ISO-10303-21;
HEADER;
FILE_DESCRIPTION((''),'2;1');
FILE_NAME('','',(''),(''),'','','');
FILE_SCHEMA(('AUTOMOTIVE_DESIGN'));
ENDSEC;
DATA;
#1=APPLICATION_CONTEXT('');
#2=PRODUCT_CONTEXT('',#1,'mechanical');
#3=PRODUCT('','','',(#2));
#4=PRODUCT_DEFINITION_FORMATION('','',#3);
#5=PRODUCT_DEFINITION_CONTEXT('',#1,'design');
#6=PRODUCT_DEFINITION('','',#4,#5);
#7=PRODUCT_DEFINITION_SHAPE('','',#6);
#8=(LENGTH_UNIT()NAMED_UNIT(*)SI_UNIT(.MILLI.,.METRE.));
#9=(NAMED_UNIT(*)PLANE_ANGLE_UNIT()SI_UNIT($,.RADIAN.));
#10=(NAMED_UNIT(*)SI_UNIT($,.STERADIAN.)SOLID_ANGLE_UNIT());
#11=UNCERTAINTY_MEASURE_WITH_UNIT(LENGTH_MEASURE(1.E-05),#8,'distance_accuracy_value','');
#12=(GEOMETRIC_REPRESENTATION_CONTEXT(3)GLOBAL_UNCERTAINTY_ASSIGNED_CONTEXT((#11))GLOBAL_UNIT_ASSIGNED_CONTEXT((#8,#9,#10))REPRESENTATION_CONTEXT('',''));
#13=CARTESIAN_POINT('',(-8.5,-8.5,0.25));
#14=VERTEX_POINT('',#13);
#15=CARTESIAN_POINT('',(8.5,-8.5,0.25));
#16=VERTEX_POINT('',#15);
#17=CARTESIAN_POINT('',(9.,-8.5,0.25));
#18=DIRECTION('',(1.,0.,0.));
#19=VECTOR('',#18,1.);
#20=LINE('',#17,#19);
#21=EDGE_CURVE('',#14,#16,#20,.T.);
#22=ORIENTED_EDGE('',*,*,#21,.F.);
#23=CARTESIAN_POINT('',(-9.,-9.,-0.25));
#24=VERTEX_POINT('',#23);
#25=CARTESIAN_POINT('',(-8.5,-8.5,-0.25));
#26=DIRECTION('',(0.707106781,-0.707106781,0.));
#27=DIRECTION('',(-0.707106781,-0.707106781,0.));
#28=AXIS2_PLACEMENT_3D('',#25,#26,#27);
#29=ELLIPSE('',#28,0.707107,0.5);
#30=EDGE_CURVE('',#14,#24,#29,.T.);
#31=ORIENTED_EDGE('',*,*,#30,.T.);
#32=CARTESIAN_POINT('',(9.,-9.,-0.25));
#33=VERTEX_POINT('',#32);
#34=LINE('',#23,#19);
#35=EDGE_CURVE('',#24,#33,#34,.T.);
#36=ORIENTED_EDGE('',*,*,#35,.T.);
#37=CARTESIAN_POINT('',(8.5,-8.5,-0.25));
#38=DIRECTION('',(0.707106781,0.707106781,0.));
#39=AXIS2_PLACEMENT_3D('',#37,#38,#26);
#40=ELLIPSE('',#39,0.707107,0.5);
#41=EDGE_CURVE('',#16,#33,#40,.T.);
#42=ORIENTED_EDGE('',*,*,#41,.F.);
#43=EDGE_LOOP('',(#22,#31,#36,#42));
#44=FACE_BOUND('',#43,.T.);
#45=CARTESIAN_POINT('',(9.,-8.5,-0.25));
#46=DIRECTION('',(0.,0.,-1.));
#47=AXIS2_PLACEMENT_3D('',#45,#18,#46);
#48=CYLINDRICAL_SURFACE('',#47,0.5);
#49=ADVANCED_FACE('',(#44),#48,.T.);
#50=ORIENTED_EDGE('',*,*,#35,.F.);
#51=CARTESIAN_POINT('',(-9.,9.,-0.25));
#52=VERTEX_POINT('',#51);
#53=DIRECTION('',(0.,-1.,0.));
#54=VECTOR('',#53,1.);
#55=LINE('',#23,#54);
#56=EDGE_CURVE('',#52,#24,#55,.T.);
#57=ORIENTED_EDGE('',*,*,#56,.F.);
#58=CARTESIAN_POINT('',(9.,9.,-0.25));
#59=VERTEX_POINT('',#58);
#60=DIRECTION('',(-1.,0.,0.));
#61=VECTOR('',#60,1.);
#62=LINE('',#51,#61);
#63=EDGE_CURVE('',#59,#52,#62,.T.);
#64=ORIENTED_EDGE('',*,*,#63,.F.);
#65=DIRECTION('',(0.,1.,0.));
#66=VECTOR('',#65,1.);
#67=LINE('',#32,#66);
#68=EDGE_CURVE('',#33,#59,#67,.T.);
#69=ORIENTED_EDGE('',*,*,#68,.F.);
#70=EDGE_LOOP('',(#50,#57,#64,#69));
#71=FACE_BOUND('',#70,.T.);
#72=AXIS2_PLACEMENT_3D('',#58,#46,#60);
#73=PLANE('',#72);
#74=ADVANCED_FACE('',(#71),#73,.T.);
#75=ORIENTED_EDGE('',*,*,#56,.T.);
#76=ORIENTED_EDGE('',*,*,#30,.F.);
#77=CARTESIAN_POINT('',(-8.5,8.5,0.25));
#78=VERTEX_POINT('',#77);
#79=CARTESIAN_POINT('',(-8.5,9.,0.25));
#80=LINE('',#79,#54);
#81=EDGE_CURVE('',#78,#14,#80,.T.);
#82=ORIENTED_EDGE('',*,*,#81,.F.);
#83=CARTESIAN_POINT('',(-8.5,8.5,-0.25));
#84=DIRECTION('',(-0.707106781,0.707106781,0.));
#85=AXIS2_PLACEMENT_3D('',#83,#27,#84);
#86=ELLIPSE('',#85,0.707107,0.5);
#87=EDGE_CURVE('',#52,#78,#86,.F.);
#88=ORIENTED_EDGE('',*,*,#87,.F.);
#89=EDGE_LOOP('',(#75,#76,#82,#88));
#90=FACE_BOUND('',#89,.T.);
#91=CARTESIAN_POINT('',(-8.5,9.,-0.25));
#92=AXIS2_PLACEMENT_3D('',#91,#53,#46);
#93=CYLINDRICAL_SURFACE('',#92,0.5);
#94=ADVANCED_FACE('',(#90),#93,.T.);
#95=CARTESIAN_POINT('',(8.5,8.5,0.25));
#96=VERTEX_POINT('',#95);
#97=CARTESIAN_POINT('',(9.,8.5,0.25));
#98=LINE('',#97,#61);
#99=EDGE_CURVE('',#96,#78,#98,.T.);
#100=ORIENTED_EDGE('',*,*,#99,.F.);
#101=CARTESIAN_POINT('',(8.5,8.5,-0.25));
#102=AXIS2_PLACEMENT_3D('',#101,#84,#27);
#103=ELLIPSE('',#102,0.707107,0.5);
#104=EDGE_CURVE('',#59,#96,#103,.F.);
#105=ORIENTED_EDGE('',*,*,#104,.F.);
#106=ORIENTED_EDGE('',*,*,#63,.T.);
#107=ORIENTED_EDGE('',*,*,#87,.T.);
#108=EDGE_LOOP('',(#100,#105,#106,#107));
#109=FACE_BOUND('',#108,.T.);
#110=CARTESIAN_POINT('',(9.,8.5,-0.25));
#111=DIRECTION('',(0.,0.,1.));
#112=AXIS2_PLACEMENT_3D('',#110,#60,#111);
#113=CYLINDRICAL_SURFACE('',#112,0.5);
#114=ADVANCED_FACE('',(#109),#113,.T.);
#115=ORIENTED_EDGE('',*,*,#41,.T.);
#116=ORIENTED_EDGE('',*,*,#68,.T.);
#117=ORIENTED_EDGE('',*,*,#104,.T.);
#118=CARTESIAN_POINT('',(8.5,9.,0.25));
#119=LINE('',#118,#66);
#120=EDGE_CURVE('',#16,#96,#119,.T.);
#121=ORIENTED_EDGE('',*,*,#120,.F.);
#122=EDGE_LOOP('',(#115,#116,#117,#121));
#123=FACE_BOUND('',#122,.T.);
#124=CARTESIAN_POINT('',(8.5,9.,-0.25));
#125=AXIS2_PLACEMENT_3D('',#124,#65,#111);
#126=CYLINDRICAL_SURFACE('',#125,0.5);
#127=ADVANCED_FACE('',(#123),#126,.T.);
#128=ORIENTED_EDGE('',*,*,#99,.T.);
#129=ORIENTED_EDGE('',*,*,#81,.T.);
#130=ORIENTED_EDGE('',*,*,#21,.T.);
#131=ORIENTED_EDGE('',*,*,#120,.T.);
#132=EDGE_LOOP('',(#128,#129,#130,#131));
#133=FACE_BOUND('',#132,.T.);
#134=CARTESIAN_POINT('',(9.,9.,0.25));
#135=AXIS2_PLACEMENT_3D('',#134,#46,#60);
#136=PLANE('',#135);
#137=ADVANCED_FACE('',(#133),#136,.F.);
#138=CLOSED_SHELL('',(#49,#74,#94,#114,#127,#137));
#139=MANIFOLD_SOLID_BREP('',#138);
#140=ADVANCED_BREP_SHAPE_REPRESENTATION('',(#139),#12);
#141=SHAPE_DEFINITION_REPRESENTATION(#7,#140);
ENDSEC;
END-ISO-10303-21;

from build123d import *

# Parameters (mm, degrees)
IZIM1_W                     = 18
IZIM1_H                     = 18
Y_KSEKLIK_EKSTR_ZYON1_DEPTH = 0.25
RADYUS1_R                   = 0.5


with BuildPart() as part:
    # Çizim1 → Yükseklik-Ekstrüzyon1 (new, symmetric)
    with BuildSketch(Plane.XY):
        Rectangle(IZIM1_W, IZIM1_H)
    extrude(amount=Y_KSEKLIK_EKSTR_ZYON1_DEPTH, both=True)

    # Radyus1
    radyus1_edges = [part.edges().sort_by_distance(p)[0] for p in [
        (9, 0, 0.25),
        (0, -9, 0.25),
        (-9, 0, 0.25),
        (0, 9, 0.25),
    ]]
    fillet(radyus1_edges, radius=RADYUS1_R - 0.0001)  # a hair under: the kernel refuses the full size


solid = part.part
